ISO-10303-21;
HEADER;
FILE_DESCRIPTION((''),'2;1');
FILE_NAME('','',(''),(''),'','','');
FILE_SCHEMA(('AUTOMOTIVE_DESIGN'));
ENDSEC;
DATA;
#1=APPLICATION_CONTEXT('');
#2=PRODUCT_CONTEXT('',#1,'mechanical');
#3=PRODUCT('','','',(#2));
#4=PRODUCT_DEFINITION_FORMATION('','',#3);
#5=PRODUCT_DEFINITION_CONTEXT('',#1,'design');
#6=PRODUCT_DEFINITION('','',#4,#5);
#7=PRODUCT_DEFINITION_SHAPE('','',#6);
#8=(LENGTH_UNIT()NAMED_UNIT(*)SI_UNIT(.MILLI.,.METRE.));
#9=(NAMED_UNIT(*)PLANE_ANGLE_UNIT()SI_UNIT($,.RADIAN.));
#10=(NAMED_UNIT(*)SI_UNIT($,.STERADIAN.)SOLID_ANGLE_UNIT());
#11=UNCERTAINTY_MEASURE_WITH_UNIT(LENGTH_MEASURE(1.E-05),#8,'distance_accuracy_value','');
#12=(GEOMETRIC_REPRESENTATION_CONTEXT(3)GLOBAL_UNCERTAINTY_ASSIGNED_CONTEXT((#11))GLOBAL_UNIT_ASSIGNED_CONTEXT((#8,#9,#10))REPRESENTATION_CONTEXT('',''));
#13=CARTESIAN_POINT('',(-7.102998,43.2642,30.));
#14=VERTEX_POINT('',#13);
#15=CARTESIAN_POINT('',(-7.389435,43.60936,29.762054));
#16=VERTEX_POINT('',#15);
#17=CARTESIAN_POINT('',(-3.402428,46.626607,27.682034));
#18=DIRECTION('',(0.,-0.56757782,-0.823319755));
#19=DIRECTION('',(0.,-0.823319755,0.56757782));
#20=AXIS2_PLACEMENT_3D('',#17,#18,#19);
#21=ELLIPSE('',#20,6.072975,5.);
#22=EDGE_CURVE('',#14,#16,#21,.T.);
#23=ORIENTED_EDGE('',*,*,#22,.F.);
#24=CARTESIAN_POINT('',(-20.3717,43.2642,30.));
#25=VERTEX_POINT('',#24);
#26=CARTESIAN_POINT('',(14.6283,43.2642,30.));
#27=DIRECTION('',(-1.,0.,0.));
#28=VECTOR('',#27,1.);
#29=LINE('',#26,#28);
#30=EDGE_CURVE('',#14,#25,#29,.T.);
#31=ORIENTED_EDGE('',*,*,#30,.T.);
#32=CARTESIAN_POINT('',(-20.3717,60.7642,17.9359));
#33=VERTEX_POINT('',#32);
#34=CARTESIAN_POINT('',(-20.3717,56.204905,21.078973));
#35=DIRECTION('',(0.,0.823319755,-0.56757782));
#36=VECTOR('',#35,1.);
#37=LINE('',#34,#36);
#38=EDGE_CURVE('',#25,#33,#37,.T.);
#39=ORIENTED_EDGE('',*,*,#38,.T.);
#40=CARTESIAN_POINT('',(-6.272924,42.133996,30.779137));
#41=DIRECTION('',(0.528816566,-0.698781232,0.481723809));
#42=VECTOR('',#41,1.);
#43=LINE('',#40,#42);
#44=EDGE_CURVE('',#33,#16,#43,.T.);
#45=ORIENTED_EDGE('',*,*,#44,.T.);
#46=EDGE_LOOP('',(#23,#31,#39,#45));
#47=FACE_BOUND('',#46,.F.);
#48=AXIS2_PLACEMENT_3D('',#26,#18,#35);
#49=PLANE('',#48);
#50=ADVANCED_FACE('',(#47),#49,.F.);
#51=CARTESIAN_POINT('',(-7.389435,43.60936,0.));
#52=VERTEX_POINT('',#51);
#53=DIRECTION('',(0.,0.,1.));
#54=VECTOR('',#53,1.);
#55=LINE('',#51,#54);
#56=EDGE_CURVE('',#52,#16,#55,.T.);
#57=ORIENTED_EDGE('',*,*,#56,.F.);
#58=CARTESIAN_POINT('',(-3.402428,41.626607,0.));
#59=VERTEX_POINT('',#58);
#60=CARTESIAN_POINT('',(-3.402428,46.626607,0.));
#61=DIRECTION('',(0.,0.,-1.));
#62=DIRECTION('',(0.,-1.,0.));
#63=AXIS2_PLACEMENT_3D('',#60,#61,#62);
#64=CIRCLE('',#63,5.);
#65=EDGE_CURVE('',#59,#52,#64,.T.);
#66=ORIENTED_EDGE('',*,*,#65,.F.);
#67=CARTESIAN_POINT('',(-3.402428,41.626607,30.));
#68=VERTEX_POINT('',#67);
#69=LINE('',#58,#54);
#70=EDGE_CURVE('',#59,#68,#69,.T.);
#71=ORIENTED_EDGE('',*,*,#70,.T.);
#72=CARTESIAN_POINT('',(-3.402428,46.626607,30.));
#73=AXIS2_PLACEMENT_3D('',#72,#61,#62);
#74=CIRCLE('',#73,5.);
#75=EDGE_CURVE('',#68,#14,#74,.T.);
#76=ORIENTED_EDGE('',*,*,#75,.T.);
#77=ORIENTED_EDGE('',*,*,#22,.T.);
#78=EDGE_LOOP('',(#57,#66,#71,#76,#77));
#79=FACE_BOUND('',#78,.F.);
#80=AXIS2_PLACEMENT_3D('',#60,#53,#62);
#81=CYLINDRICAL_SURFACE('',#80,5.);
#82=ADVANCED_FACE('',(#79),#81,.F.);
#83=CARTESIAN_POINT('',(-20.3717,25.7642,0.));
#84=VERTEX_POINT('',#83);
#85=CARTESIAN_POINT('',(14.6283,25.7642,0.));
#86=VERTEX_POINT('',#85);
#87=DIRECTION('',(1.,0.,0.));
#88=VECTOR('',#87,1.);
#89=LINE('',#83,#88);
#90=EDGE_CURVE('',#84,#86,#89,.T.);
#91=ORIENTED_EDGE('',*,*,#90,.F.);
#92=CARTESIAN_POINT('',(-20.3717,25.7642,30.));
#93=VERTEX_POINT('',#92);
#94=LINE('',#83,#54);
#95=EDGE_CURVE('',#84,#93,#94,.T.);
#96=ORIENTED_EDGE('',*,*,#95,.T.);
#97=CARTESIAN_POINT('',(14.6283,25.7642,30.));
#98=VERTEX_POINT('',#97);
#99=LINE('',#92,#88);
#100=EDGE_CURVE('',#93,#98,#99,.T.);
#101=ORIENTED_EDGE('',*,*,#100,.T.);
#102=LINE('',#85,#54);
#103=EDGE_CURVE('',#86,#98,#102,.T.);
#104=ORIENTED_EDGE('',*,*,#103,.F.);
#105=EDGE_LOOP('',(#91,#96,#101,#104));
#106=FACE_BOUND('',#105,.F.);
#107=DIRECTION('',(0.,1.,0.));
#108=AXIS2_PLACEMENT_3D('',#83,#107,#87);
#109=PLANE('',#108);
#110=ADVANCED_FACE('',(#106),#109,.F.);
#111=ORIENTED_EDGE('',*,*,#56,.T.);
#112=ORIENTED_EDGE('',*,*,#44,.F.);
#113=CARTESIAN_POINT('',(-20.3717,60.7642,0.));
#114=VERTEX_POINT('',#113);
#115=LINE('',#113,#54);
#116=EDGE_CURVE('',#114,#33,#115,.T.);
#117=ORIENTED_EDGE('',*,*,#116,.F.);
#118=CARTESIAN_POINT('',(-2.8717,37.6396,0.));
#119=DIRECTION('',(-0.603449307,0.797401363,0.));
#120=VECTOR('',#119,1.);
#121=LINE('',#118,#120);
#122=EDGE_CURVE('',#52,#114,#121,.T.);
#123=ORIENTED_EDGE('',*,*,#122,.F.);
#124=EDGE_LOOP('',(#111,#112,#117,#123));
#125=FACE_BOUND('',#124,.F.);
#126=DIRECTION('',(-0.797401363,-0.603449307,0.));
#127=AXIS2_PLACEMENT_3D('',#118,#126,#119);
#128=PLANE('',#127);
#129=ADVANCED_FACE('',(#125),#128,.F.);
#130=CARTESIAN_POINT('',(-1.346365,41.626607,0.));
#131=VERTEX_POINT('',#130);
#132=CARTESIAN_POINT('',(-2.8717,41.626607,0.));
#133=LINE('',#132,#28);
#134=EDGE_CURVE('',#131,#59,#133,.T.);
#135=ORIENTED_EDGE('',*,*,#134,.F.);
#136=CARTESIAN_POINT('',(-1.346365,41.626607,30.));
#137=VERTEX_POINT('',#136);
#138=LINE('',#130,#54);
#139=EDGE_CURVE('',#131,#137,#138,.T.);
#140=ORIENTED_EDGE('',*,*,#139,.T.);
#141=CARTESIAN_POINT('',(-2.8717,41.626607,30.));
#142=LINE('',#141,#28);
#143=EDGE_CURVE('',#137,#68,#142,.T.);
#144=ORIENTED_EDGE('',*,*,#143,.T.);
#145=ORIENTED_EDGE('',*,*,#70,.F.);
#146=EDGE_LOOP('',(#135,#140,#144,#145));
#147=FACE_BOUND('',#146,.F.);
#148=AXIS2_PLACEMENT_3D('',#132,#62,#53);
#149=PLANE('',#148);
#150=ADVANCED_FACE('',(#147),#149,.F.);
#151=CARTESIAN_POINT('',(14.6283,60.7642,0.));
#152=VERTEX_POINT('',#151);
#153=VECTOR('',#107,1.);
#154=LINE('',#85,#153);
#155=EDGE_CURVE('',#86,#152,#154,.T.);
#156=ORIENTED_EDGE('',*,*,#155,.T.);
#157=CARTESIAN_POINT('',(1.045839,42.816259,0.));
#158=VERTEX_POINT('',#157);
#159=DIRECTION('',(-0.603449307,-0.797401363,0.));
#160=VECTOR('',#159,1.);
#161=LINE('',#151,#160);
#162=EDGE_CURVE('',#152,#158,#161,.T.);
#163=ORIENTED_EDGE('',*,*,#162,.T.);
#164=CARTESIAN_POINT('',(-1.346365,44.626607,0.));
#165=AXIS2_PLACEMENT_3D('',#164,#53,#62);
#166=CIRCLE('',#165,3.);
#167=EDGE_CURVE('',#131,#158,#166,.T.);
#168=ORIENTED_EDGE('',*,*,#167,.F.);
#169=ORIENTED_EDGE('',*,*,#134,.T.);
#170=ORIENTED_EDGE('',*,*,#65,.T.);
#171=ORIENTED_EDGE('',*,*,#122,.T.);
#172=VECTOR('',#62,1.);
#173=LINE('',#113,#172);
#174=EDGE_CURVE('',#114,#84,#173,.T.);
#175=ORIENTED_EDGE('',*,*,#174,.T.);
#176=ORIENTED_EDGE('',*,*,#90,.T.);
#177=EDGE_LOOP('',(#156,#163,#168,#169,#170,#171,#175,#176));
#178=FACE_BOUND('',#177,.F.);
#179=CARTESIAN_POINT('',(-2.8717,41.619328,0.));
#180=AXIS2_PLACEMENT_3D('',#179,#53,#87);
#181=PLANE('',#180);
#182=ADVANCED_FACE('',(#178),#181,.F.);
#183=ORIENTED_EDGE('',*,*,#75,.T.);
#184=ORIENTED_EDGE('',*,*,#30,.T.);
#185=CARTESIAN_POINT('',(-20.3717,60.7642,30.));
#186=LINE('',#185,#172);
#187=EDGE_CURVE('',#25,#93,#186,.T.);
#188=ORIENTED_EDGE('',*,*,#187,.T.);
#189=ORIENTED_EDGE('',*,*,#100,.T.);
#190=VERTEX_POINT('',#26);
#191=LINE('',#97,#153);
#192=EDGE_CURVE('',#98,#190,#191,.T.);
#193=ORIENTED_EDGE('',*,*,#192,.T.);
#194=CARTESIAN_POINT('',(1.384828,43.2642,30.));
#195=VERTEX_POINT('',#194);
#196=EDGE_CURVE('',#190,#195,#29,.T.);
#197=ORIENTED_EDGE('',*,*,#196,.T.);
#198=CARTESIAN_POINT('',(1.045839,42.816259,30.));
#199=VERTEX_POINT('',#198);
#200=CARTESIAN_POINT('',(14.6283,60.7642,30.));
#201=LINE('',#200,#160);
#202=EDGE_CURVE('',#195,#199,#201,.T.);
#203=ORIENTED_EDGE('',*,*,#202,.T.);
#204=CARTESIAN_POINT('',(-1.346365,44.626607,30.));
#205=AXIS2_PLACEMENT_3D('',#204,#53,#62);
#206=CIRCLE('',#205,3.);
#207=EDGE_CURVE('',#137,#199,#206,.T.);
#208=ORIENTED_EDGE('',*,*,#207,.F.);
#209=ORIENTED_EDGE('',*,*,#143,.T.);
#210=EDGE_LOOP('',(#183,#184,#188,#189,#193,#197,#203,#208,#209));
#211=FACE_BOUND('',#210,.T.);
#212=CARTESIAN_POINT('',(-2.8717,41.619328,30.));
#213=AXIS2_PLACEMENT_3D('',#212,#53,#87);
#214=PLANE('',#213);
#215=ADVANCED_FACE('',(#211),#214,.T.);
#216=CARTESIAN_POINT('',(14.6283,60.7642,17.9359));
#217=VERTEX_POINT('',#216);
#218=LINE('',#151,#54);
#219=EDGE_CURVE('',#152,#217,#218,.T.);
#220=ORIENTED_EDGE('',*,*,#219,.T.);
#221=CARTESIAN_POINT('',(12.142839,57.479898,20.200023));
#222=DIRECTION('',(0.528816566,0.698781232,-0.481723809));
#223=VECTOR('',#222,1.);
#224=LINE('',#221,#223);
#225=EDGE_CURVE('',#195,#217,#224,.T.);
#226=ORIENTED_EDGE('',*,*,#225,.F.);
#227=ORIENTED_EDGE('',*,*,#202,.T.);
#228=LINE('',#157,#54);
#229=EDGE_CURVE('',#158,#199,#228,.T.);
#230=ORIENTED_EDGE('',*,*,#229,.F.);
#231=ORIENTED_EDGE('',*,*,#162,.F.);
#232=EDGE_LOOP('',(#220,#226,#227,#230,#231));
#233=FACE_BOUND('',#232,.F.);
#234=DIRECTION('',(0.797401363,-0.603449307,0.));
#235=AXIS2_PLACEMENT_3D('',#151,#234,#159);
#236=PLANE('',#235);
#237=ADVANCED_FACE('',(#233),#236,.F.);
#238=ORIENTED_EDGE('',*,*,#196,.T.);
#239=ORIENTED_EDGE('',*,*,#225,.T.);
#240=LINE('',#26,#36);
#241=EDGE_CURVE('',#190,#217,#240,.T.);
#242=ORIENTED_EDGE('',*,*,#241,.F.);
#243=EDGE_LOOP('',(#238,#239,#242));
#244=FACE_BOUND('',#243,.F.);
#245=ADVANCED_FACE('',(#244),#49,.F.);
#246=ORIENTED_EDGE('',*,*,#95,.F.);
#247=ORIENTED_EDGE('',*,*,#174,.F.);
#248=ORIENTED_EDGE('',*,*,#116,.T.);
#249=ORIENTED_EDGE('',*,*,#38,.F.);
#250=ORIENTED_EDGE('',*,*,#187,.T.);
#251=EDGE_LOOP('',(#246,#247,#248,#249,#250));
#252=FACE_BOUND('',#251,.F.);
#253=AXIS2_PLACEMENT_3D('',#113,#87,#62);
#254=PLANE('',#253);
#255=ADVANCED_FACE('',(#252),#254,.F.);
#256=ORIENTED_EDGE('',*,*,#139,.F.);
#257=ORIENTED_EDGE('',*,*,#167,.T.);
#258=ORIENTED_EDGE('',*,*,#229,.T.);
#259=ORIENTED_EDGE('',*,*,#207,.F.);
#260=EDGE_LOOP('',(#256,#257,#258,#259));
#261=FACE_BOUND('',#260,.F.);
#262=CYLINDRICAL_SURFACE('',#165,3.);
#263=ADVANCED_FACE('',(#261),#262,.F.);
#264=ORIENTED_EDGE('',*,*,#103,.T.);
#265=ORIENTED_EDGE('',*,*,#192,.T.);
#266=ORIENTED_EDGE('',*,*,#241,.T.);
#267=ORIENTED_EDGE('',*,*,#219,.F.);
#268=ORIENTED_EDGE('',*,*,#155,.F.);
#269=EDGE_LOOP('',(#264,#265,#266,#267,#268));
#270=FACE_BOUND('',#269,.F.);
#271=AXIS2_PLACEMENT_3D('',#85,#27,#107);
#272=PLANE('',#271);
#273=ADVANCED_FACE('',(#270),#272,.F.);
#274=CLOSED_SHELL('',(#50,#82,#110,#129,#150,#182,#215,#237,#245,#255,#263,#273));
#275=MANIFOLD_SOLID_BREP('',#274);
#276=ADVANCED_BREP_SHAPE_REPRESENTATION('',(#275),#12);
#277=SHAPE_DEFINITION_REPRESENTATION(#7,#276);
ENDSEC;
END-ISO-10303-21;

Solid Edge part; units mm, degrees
sketch "Sketch1" plane through (0, 0, 0) normal (0, 0, 1) x (1, 0, 0)
  line L0 (14.6283, 60.7642) -> (-2.8717, 37.6396)
  line L1 (-2.8717, 37.6396) -> (-20.3717, 60.7642)
  line L2 (-20.3717, 60.7642) -> (-20.3717, 25.7642)
  line L3 (-20.3717, 25.7642) -> (14.6283, 25.7642)
  line L4 (14.6283, 25.7642) -> (14.6283, 60.7642)
extrude "Protrusion1" add sketch "Sketch1" along normal blind 30
chamfer "Chamfer_1" distance 5 angle 45 1 edges at (-2.8717, 37.6396, 15)
sketch "Sketch2" plane through (14.6283, 43.2642, 15) normal (1, 0, 0) x (0, 0, -1)
  line L0 (-15, 0) -> (-15, 17.5)
  line L1 (-15, 17.5) -> (-2.9359, 17.5)
  line L2 (-15, 0) -> (-2.9359, 17.5)
extrude "ExtrudedCutout_1" cut sketch "Sketch2" against normal blind 45
fillet "Round_2" radius 5 1 edges at (-5.8889, 41.6266, 15)
fillet "Round_3" radius 3 1 edges at (0.1455, 41.6266, 15)
properties material "Chocolate"
